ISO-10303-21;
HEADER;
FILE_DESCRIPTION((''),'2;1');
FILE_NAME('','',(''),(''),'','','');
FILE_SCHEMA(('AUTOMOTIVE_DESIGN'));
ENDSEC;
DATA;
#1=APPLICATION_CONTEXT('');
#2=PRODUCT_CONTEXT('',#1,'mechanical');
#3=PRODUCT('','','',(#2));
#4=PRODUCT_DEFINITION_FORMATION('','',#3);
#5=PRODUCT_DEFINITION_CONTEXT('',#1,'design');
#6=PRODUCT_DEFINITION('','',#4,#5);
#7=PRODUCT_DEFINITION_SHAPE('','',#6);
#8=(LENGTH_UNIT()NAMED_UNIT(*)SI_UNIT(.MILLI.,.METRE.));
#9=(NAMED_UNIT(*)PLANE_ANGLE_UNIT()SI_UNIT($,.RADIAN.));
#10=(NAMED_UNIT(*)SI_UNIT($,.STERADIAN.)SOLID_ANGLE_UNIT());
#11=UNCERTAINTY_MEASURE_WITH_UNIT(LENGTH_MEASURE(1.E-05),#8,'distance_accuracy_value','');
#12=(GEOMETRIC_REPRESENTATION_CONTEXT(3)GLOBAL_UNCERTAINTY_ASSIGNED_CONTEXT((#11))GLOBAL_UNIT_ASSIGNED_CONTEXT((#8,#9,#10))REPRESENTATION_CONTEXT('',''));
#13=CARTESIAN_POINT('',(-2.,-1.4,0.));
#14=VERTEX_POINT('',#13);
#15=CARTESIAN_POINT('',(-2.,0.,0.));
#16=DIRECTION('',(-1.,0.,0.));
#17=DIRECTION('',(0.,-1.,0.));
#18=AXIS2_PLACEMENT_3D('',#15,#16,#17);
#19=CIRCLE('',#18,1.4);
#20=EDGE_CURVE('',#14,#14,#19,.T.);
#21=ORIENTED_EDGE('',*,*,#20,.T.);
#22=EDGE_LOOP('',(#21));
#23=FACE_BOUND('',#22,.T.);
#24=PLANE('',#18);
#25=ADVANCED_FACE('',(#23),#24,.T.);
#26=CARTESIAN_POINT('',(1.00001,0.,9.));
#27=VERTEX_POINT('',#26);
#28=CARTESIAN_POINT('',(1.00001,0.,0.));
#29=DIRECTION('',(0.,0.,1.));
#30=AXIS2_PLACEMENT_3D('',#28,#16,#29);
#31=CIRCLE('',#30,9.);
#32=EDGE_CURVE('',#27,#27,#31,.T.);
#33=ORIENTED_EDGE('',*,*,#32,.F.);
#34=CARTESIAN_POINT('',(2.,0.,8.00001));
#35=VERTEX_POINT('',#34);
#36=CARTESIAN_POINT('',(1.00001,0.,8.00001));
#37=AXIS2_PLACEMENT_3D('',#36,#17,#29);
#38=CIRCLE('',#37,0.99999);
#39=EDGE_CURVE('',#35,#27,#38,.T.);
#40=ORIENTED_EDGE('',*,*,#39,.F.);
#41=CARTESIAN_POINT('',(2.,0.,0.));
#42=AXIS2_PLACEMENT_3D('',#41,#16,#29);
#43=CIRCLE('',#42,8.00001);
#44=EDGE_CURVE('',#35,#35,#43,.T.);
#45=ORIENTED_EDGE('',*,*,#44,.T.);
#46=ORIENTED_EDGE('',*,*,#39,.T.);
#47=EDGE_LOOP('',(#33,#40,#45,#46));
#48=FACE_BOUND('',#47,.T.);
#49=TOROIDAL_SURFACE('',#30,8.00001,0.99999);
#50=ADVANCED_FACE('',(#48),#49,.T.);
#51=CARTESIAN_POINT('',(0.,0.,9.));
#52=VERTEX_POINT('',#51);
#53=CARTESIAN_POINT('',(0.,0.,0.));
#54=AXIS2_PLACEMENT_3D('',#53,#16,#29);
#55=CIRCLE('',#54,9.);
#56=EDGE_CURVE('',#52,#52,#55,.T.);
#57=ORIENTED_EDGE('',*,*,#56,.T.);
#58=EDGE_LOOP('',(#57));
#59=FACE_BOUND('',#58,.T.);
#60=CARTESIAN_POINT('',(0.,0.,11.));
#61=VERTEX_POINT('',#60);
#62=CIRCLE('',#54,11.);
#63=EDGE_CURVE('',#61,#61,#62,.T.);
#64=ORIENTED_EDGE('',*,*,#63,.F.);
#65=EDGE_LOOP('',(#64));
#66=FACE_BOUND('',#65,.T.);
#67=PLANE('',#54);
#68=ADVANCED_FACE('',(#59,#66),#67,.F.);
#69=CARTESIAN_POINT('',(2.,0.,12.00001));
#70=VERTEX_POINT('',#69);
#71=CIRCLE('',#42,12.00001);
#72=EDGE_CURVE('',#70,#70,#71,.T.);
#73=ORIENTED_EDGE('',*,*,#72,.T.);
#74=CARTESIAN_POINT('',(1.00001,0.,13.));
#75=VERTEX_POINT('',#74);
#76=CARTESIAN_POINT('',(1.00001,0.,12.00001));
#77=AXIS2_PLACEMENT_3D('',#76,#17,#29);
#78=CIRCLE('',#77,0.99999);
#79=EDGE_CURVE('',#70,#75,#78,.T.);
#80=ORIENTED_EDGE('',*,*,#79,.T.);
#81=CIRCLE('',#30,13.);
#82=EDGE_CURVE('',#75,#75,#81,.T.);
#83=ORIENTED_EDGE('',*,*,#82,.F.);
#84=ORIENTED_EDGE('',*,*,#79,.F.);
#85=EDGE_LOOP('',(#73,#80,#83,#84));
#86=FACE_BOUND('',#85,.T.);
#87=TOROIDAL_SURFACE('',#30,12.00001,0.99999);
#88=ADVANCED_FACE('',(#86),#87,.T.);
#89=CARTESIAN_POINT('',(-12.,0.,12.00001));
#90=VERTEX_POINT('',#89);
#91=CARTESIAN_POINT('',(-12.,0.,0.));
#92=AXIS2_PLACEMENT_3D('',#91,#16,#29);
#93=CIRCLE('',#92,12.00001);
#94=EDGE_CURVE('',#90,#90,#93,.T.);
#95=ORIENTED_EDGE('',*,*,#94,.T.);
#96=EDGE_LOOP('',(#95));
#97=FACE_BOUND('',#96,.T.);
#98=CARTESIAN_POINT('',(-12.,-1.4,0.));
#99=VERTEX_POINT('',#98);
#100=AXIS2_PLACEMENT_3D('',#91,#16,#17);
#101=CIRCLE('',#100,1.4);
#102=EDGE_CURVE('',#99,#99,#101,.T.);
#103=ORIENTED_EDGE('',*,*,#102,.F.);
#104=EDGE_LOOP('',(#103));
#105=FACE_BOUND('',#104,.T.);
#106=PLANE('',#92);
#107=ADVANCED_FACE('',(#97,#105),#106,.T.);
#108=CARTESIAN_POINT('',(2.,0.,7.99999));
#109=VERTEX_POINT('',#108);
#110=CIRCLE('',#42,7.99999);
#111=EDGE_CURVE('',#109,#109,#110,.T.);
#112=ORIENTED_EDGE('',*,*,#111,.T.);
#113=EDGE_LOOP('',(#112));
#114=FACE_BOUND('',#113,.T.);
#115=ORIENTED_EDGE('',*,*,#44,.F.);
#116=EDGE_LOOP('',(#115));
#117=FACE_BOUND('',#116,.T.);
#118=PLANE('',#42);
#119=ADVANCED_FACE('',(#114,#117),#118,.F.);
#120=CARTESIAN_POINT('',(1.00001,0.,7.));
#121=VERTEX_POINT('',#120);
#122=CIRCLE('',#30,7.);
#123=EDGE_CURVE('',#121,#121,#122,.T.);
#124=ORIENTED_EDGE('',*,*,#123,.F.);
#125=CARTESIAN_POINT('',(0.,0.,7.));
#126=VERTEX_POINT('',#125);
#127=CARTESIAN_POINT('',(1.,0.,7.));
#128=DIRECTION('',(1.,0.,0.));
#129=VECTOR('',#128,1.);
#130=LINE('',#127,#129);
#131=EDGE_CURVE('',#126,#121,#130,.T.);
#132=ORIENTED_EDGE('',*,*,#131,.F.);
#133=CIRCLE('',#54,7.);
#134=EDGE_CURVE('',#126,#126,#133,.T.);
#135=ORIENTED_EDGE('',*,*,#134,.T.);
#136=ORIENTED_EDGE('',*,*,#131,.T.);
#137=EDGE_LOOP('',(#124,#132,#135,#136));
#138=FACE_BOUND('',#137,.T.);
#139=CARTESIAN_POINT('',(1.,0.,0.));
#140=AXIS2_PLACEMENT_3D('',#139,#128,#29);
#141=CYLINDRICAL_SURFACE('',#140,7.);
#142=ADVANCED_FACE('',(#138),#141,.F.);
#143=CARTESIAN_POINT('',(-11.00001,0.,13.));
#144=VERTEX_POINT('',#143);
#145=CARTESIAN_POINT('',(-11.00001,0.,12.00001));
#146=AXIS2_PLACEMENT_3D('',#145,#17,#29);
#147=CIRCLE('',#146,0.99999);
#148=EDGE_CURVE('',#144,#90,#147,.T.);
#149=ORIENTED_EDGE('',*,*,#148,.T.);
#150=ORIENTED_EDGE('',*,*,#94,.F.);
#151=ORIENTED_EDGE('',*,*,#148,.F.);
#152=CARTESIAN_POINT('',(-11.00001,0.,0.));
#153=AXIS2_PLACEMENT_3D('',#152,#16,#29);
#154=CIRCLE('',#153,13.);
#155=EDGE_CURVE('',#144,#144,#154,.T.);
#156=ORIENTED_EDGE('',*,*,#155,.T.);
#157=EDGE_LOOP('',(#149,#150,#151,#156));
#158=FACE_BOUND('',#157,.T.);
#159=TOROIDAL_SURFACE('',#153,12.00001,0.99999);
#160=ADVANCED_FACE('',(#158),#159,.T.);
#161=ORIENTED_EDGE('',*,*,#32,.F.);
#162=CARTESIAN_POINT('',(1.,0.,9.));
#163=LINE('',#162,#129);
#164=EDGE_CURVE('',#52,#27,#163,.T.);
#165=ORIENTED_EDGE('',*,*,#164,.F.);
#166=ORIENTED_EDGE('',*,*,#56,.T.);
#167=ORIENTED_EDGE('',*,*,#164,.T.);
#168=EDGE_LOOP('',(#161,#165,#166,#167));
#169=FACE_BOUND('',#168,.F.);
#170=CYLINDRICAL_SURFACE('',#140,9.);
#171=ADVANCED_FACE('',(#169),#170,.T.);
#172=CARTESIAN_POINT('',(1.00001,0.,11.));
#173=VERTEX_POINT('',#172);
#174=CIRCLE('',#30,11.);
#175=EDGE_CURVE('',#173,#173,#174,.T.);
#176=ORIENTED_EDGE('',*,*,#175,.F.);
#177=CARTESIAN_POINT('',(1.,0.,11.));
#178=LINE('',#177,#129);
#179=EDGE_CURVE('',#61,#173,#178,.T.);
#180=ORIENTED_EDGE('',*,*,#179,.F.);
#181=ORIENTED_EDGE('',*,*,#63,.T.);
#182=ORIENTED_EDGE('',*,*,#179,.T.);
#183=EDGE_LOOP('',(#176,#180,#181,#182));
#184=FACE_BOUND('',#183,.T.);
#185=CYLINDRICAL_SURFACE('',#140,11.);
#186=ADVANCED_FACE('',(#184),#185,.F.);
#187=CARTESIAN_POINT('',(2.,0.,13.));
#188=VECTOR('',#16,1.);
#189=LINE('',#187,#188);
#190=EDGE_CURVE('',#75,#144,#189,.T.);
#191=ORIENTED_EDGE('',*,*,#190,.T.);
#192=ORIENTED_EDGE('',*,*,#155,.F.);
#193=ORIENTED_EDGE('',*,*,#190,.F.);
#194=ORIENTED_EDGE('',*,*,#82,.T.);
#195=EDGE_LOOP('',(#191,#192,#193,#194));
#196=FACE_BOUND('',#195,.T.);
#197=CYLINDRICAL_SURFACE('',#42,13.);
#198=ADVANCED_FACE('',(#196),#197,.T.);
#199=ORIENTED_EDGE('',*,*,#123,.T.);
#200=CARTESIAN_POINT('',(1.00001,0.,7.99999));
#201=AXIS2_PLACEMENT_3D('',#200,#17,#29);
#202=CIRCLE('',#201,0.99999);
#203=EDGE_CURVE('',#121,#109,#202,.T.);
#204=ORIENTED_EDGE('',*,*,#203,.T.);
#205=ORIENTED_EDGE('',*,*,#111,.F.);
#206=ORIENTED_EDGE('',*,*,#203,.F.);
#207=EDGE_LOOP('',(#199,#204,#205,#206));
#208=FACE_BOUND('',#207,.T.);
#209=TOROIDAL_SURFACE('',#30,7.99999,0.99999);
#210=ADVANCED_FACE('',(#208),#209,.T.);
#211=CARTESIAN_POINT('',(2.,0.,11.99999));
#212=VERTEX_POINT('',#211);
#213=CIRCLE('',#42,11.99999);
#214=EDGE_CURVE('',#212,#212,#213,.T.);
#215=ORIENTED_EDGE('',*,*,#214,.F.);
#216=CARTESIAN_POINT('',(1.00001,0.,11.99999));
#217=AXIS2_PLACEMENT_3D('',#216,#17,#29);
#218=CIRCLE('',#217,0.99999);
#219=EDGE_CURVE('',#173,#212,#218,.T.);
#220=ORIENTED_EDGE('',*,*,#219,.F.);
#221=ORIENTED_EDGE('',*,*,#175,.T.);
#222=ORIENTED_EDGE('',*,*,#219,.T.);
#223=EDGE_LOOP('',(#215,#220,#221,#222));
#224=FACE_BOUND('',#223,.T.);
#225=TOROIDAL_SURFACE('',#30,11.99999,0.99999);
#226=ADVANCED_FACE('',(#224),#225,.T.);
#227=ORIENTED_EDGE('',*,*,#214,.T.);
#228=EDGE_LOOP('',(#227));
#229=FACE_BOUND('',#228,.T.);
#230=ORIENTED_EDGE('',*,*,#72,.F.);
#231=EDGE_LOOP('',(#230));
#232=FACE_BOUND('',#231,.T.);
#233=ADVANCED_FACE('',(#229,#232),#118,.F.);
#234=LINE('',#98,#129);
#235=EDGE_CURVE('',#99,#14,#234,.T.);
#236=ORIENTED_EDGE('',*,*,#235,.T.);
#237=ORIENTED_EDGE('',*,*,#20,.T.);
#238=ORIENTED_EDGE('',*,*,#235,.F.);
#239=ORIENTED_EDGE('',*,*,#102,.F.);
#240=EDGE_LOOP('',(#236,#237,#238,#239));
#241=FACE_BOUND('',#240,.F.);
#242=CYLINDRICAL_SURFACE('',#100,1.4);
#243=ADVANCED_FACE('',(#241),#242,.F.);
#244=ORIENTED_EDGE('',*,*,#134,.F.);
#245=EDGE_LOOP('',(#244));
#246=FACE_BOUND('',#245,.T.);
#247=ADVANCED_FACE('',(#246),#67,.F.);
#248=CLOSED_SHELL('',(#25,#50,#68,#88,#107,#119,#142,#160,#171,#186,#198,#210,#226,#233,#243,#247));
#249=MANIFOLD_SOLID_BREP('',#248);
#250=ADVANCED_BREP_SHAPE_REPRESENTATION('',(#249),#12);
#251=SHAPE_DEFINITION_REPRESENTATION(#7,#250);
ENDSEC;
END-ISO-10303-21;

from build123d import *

# Parameters (mm, degrees)
F0_W     = 2
F0_H     = 2
F0_W_2   = 12
F2_R     = 0.99999
F3_R     = 1.4
F4_DEPTH = 10


# Not quite as in the source:
# - a fillet or chamfer is up to 0.001 mm smaller than in the source, because OpenCascade refuses the exact size


with BuildPart() as f1:
    # F0 (on Front) → F1 (revolve)
    with BuildSketch(Plane.XZ):
        Polygon((-12, 0), (0, 0), (0, 7), (0, 9), (0, 11), (-12, 11), align=None)
        with Locations((1, 8)):
            Rectangle(F0_W, F0_H)
        with Locations((-6, 12)):
            Rectangle(F0_W_2, F0_H)
        with Locations((1, 12)):
            Rectangle(F0_W, F0_H)
    revolve(axis=Axis((-6, 0, 0), (-1, 0, 0)))

    # F2 (radius 1 in the source; OpenCascade refuses exactly that, so slightly less here)
    f2_edges = [f1.edges().sort_by_distance(p)[0] for p in [
        (2, 0, -13),
        (2, 0, -9),
        (2, 0, -7),
        (2, 0, -11),
        (-12, 0, -13),
    ]]
    fillet(f2_edges, radius=F2_R)

    # F3 (on face) → F4 (cut)
    with BuildSketch(Plane(origin=(-12, 0, 0), x_dir=(0, -1, 0), z_dir=(-1, 0, 0))):
        Circle(F3_R)
    extrude(amount=-F4_DEPTH, mode=Mode.SUBTRACT)


solid = f1.part
